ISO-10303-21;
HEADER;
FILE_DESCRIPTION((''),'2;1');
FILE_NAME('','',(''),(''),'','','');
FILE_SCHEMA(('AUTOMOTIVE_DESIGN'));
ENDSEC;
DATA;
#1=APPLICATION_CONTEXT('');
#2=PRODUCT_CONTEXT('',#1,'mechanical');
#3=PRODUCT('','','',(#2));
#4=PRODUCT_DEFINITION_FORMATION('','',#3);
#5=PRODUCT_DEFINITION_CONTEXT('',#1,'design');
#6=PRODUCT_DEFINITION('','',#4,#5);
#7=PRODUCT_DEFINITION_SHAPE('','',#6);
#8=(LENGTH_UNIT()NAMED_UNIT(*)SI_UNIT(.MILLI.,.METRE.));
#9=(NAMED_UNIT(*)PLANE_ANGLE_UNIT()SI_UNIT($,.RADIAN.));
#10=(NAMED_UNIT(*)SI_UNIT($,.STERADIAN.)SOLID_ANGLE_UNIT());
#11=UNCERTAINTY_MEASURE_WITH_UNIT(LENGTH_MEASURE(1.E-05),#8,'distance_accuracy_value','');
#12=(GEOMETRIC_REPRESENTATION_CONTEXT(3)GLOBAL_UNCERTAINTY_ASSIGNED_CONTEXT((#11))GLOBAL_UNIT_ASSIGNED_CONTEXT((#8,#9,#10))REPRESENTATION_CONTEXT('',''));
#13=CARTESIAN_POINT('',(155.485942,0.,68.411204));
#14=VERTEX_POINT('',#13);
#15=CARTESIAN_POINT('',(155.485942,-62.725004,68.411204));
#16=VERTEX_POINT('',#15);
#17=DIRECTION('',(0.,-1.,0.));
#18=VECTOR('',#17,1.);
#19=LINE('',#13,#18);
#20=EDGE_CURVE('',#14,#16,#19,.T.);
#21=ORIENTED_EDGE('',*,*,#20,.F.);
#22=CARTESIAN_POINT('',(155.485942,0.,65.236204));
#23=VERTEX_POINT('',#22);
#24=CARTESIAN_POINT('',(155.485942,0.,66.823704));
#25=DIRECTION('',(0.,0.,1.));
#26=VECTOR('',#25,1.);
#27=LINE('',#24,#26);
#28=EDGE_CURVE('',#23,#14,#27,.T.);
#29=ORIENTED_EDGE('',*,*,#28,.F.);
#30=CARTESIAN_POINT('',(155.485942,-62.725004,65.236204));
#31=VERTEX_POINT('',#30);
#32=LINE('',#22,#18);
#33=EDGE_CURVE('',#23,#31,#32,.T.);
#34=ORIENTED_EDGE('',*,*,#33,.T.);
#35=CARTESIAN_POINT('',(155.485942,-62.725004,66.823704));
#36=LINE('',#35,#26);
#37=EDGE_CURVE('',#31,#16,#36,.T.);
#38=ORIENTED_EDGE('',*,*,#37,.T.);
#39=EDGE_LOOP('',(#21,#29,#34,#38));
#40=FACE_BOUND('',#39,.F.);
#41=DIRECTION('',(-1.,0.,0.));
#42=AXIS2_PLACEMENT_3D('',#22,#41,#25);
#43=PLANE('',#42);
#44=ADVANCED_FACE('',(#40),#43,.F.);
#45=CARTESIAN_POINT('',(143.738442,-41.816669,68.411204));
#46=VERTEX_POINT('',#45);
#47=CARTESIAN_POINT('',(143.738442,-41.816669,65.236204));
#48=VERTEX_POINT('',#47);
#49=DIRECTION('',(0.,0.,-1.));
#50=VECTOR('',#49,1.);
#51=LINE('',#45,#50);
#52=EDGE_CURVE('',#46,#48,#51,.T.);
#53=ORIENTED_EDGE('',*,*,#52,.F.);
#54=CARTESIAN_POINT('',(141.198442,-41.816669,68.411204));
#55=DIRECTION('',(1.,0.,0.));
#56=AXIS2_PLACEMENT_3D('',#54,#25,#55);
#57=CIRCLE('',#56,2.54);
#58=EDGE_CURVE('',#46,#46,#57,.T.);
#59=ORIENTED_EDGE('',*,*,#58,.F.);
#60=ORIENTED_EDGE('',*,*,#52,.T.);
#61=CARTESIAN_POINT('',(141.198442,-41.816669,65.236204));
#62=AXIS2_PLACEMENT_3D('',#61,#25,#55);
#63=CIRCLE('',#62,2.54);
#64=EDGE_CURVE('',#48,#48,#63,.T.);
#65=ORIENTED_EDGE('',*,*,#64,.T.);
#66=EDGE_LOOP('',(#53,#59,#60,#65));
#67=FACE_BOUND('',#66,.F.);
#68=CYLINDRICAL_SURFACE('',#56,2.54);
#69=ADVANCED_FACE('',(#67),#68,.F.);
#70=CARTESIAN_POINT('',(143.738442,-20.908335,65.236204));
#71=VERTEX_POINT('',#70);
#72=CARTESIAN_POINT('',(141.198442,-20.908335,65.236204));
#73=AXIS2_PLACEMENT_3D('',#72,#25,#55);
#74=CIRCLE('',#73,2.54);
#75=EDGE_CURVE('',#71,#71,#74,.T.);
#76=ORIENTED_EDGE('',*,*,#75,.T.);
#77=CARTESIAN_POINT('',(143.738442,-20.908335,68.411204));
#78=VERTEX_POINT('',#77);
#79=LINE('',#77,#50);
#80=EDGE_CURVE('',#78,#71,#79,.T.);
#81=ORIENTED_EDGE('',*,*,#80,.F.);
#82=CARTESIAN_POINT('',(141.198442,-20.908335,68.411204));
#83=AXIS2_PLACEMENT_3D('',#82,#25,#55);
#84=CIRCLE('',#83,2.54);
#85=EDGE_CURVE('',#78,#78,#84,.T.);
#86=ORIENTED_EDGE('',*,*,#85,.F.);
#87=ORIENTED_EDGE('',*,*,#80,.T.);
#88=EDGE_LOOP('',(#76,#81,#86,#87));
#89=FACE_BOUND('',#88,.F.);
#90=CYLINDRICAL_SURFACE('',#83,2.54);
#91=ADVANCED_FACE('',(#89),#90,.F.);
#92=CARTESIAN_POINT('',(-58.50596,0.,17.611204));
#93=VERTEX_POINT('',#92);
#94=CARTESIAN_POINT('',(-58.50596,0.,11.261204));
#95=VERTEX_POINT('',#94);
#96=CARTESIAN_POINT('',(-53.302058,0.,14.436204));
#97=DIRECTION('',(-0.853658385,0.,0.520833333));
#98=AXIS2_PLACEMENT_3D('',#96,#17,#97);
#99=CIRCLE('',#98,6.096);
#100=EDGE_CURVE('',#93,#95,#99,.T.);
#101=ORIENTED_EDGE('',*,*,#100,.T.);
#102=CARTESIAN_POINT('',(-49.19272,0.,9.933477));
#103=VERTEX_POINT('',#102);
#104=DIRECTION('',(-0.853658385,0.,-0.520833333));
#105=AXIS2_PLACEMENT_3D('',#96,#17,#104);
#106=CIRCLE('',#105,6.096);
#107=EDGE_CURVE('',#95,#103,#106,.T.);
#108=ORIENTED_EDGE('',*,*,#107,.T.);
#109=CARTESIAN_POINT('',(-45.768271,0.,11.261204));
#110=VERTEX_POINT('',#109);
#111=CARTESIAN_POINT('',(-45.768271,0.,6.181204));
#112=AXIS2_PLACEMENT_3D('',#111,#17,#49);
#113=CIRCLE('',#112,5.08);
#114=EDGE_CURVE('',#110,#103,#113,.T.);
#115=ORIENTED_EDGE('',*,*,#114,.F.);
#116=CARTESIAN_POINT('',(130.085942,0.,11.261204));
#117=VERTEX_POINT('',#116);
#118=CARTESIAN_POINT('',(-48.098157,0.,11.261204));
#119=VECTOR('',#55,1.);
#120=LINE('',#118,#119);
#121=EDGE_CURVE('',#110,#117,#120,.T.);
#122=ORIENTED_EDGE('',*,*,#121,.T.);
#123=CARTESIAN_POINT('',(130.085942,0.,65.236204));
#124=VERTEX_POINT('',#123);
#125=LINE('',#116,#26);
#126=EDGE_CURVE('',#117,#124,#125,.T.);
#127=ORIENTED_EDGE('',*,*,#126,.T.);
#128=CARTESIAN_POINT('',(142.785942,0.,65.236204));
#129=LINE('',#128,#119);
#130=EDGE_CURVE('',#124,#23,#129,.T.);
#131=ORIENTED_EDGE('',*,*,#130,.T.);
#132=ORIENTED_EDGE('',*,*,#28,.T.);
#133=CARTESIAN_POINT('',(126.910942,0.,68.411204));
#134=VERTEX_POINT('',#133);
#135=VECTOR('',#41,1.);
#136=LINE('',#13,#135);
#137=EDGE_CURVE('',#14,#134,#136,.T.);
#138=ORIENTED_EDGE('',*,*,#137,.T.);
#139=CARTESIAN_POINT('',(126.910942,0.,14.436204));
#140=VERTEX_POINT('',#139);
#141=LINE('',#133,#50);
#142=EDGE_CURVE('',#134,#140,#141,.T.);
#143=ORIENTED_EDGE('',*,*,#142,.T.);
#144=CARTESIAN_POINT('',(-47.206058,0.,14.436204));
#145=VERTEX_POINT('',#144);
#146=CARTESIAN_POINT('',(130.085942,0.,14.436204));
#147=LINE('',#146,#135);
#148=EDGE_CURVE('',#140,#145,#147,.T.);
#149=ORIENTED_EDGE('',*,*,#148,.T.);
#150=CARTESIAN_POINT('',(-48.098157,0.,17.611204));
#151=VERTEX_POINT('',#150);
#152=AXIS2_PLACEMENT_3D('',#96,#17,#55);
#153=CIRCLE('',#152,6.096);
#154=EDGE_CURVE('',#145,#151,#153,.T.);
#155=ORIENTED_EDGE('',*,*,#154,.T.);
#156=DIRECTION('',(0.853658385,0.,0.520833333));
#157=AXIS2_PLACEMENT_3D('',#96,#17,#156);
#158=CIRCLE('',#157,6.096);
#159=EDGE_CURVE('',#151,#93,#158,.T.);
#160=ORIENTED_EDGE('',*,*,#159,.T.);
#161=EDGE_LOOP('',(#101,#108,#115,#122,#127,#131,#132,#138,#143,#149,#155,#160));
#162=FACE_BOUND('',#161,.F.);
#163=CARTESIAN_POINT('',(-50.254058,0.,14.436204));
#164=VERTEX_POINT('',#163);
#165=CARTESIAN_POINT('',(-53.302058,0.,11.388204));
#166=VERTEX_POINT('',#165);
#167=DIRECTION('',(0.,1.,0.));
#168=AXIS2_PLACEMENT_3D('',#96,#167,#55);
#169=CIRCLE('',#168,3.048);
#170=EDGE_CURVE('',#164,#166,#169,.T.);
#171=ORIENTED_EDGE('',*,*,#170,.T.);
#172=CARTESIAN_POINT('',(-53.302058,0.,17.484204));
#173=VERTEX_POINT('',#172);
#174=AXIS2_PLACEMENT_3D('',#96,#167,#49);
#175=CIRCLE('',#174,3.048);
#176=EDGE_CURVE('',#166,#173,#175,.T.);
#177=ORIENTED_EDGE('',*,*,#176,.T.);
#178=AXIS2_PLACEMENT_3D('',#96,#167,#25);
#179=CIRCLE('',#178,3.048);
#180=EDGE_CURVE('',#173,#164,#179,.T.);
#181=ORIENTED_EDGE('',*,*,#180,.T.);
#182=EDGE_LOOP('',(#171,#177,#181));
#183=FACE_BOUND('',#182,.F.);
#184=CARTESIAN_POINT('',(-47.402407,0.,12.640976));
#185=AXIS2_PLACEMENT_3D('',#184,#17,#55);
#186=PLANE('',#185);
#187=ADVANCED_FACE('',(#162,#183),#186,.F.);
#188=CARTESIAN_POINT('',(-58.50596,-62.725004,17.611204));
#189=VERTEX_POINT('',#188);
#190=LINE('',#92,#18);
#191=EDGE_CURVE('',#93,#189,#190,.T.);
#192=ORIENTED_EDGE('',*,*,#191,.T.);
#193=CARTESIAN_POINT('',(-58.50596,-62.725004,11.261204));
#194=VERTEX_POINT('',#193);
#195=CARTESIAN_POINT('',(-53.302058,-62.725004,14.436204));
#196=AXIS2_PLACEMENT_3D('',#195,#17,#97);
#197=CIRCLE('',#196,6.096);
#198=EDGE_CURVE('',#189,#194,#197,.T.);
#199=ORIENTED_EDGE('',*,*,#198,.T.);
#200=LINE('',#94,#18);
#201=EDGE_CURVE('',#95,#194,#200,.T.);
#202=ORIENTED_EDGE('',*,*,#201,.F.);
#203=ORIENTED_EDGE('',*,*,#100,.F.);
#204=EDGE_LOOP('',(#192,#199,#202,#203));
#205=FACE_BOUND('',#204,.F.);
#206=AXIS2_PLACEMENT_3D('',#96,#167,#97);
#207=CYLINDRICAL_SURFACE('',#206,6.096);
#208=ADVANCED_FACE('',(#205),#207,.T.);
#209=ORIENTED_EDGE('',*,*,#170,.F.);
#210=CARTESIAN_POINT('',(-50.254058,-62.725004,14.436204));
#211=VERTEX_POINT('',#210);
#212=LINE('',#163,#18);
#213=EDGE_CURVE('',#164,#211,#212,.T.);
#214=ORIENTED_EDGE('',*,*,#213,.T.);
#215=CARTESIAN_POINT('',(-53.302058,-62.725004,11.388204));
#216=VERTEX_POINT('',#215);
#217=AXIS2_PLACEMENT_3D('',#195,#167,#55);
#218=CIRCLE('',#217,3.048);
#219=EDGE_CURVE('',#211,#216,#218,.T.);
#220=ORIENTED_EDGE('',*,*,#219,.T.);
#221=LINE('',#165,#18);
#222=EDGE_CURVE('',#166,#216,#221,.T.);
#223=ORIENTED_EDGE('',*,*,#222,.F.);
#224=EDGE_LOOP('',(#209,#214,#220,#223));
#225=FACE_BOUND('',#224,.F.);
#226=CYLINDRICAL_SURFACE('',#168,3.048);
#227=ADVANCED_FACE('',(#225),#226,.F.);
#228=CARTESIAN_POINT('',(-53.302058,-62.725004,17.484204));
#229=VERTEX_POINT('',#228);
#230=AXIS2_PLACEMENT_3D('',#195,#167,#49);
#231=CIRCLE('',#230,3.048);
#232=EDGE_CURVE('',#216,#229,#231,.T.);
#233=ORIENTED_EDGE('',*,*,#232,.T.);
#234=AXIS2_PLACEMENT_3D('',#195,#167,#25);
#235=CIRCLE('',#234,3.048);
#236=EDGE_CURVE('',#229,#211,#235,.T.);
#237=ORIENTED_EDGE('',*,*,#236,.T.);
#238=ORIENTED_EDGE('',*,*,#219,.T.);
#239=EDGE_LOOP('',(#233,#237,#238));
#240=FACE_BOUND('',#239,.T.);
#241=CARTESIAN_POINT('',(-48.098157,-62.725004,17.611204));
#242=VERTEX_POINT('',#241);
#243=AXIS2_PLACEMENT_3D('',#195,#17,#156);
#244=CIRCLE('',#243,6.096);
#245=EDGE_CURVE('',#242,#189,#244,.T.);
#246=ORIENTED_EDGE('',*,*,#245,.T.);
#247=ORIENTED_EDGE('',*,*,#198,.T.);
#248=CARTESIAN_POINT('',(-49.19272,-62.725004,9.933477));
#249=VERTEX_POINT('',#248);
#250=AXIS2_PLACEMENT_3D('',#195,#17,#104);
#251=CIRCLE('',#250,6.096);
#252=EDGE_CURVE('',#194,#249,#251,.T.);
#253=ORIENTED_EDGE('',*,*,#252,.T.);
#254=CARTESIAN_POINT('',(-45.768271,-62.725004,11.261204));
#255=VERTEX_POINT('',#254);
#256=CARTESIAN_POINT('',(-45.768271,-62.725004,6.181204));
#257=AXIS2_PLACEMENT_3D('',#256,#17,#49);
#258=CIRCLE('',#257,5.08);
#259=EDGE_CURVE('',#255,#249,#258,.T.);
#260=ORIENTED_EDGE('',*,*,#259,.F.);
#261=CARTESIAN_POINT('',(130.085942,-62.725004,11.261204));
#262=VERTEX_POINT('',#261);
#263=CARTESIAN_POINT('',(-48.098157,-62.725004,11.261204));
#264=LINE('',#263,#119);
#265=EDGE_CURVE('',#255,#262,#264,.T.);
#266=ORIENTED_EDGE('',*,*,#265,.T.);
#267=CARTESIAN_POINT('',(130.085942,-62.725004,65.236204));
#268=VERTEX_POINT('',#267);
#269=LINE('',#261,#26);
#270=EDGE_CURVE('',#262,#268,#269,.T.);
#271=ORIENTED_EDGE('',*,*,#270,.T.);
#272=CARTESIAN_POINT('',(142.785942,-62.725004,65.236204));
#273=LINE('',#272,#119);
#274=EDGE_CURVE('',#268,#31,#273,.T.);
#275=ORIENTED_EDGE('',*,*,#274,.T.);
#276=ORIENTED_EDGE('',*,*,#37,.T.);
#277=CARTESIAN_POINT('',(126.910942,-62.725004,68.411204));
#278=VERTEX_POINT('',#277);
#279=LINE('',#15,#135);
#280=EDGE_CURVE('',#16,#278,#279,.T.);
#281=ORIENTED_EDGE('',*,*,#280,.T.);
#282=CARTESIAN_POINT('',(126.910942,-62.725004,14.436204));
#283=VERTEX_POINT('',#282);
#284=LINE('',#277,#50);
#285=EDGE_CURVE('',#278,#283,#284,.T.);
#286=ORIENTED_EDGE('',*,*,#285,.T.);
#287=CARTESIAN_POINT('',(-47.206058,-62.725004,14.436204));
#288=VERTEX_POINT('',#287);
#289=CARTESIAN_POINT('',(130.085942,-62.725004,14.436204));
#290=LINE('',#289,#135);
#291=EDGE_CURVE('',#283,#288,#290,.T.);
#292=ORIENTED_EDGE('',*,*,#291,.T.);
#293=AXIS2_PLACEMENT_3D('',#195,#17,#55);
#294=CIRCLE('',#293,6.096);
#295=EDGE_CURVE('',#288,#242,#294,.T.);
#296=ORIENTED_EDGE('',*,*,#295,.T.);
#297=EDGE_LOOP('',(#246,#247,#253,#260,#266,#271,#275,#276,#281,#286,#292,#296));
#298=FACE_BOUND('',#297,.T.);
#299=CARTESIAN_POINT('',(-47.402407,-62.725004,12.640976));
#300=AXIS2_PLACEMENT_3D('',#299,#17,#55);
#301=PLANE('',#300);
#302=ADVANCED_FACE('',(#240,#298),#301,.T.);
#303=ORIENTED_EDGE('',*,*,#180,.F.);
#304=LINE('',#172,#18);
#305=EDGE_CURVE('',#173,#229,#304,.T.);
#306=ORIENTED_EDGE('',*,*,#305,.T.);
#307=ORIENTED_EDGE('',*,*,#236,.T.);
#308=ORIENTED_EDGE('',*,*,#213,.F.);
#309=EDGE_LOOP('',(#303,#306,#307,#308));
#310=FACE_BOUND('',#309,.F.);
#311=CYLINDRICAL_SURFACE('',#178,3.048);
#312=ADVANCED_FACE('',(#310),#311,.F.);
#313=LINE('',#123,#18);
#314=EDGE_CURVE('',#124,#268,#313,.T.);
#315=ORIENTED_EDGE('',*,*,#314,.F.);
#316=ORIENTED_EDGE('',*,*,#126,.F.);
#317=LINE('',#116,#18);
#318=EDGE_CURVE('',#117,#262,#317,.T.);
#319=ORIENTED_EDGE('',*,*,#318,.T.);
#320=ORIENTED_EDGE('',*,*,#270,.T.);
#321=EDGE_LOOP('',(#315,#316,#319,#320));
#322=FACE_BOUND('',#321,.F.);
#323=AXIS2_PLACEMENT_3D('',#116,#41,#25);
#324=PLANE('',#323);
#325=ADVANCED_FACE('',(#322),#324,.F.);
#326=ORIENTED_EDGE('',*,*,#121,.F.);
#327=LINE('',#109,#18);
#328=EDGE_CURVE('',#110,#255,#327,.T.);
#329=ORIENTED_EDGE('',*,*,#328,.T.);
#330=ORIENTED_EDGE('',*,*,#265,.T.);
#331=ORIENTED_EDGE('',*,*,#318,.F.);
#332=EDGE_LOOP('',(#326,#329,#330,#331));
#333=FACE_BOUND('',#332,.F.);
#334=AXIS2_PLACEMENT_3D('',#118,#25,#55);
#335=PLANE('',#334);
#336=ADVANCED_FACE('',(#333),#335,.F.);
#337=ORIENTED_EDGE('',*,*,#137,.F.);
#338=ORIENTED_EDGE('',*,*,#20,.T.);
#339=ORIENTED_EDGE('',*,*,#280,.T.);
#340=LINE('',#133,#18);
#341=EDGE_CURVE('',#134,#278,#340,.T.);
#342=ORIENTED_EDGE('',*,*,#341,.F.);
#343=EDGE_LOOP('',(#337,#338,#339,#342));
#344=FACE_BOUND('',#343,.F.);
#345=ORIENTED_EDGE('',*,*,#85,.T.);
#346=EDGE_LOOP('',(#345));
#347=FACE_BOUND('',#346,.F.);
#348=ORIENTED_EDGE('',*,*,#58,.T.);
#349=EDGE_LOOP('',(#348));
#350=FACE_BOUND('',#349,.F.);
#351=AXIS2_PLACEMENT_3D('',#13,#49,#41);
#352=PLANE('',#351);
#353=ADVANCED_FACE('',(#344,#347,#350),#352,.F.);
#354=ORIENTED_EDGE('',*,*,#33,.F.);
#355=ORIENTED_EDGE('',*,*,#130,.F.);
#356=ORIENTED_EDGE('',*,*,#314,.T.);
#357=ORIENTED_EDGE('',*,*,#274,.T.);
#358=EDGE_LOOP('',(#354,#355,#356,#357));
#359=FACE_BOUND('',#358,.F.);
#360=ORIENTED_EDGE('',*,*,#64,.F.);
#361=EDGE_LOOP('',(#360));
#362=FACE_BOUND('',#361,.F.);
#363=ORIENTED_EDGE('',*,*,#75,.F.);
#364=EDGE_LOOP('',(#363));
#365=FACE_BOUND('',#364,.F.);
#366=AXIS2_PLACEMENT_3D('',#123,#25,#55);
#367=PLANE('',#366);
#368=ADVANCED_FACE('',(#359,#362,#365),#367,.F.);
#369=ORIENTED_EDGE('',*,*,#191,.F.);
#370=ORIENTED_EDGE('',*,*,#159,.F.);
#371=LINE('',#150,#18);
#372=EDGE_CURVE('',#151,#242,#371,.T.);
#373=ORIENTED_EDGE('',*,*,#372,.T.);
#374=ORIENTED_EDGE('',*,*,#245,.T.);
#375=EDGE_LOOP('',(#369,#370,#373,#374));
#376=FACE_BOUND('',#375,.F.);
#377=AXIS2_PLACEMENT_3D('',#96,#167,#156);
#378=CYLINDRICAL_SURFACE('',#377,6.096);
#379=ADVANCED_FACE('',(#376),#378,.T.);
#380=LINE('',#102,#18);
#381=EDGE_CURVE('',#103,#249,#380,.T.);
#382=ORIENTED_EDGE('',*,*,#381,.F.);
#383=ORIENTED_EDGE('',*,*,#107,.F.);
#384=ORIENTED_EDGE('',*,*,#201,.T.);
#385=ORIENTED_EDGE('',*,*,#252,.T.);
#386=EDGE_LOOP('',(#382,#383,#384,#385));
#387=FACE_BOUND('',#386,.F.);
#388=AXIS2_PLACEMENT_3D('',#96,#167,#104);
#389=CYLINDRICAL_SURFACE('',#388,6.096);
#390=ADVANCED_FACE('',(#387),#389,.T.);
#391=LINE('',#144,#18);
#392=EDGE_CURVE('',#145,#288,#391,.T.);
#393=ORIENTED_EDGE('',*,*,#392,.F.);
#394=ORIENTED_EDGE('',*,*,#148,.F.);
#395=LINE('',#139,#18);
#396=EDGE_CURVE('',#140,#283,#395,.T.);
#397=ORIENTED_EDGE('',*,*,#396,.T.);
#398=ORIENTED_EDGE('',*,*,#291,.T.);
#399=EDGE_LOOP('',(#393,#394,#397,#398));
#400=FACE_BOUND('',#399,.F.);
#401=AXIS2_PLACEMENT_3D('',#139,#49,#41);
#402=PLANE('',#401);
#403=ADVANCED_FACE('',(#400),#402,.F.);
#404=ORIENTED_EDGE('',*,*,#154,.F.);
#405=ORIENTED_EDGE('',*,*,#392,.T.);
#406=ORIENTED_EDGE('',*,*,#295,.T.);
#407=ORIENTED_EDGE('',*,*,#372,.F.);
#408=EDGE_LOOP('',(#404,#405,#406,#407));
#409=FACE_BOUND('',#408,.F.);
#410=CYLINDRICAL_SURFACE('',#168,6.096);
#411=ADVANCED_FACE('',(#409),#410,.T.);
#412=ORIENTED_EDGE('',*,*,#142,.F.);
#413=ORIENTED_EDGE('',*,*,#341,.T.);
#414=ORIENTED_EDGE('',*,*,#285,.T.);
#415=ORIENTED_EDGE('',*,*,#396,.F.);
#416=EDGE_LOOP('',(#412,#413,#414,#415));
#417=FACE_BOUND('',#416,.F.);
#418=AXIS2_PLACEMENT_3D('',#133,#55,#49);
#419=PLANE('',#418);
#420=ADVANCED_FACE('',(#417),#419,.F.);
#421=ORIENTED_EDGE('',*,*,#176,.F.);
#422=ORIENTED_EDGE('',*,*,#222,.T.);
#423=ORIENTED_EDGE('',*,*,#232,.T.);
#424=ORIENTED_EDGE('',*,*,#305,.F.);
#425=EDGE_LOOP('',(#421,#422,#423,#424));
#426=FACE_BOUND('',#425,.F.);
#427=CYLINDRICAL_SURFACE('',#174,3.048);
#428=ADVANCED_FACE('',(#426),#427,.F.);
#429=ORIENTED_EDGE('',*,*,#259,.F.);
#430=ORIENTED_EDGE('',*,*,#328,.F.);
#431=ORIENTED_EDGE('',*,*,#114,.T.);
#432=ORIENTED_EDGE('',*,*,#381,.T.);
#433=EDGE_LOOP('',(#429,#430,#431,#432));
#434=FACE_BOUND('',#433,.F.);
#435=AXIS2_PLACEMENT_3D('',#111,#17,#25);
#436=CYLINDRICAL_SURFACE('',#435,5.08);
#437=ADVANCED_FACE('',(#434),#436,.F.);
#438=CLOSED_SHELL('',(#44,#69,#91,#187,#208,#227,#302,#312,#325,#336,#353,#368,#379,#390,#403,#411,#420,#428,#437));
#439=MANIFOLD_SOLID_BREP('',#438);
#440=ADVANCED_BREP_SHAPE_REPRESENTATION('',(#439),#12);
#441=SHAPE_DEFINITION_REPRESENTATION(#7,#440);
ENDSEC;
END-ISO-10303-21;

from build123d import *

# Parameters (mm, degrees)
F0_W     = 3.175
F0_H     = 3.175
F0_W_2   = 25.4
F1_DEPTH = 62.7250036666
F2_R     = 5.08
F3_R     = 2.54
F4_DEPTH = 60.072


with BuildPart() as f1:
    # F0 (on Front) → F1 (new body)
    with BuildSketch(Plane.XZ):
        with BuildLine():
            Line((-47.2060584766, 11.2612042576), (-47.2060584766, 14.4362042576))
            ThreePointArc((-47.2060584766, 14.4362042576), (-47.4333192743, 12.7872299777), (-48.0981569595, 11.2612042576))
            Line((-48.0981569595, 11.2612042576), (-47.2060584766, 11.2612042576))
        make_face()
        Polygon((126.9109415234, 14.4362042576), (-47.2060584766, 14.4362042576), (-47.2060584766, 11.2612042576), (130.0859415234, 11.2612042576), (130.0859415234, 14.4362042576), align=None)
        with BuildLine():
            ThreePointArc((-48.0981569595, 11.2612042576), (-47.4333192743, 12.7872299777), (-47.2060584766, 14.4362042576))
            ThreePointArc((-47.2060584766, 14.4362042576), (-47.4333192743, 16.0851785375), (-48.0981569595, 17.6112042576))
            ThreePointArc((-48.0981569595, 17.6112042576), (-53.3020584766, 20.5322042576), (-58.5059599937, 17.6112042576))
            ThreePointArc((-58.5059599937, 17.6112042576), (-59.3980584766, 14.4362042576), (-58.5059599937, 11.2612042576))
            ThreePointArc((-58.5059599937, 11.2612042576), (-53.3020584766, 8.3402042576), (-48.0981569595, 11.2612042576))
        make_face()
        with BuildLine():
            ThreePointArc((-53.3020584766, 17.4842042576), (-51.1467970075, 16.5914657267), (-50.2540584766, 14.4362042576))
            ThreePointArc((-50.2540584766, 14.4362042576), (-51.1467970075, 12.2809427886), (-53.3020584766, 11.3882042576))
            ThreePointArc((-53.3020584766, 11.3882042576), (-56.3500584766, 14.4362042576), (-53.3020584766, 17.4842042576))
        make_face(mode=Mode.SUBTRACT)
        Polygon((126.9109415234, 68.4112042576), (126.9109415234, 17.6112042576), (130.0859415234, 17.6112042576), (130.0859415234, 65.2362042576), (130.0859415234, 68.4112042576), align=None)
        with Locations((128.4984415234, 16.0237042576)):
            Rectangle(F0_W, F0_H)
        with Locations((142.7859415234, 66.8237042576)):
            Rectangle(F0_W_2, F0_H)
    extrude(amount=F1_DEPTH)

    # F2
    f2_edges = [f1.edges().sort_by_distance(p)[0] for p in [
        (-48.098157, -31.362502, 11.261204),
    ]]
    fillet(f2_edges, radius=F2_R)

    # F3 (on face) → F4 (cut, through all)
    with BuildSketch(Plane.XY.offset(68.4112042576)):
        with Locations((141.1984415234, -20.9083345554)):
            Circle(F3_R)
        with Locations((141.1984415234, -41.8166691112)):
            Circle(F3_R)
    extrude(amount=-F4_DEPTH, mode=Mode.SUBTRACT)


solid = f1.part
